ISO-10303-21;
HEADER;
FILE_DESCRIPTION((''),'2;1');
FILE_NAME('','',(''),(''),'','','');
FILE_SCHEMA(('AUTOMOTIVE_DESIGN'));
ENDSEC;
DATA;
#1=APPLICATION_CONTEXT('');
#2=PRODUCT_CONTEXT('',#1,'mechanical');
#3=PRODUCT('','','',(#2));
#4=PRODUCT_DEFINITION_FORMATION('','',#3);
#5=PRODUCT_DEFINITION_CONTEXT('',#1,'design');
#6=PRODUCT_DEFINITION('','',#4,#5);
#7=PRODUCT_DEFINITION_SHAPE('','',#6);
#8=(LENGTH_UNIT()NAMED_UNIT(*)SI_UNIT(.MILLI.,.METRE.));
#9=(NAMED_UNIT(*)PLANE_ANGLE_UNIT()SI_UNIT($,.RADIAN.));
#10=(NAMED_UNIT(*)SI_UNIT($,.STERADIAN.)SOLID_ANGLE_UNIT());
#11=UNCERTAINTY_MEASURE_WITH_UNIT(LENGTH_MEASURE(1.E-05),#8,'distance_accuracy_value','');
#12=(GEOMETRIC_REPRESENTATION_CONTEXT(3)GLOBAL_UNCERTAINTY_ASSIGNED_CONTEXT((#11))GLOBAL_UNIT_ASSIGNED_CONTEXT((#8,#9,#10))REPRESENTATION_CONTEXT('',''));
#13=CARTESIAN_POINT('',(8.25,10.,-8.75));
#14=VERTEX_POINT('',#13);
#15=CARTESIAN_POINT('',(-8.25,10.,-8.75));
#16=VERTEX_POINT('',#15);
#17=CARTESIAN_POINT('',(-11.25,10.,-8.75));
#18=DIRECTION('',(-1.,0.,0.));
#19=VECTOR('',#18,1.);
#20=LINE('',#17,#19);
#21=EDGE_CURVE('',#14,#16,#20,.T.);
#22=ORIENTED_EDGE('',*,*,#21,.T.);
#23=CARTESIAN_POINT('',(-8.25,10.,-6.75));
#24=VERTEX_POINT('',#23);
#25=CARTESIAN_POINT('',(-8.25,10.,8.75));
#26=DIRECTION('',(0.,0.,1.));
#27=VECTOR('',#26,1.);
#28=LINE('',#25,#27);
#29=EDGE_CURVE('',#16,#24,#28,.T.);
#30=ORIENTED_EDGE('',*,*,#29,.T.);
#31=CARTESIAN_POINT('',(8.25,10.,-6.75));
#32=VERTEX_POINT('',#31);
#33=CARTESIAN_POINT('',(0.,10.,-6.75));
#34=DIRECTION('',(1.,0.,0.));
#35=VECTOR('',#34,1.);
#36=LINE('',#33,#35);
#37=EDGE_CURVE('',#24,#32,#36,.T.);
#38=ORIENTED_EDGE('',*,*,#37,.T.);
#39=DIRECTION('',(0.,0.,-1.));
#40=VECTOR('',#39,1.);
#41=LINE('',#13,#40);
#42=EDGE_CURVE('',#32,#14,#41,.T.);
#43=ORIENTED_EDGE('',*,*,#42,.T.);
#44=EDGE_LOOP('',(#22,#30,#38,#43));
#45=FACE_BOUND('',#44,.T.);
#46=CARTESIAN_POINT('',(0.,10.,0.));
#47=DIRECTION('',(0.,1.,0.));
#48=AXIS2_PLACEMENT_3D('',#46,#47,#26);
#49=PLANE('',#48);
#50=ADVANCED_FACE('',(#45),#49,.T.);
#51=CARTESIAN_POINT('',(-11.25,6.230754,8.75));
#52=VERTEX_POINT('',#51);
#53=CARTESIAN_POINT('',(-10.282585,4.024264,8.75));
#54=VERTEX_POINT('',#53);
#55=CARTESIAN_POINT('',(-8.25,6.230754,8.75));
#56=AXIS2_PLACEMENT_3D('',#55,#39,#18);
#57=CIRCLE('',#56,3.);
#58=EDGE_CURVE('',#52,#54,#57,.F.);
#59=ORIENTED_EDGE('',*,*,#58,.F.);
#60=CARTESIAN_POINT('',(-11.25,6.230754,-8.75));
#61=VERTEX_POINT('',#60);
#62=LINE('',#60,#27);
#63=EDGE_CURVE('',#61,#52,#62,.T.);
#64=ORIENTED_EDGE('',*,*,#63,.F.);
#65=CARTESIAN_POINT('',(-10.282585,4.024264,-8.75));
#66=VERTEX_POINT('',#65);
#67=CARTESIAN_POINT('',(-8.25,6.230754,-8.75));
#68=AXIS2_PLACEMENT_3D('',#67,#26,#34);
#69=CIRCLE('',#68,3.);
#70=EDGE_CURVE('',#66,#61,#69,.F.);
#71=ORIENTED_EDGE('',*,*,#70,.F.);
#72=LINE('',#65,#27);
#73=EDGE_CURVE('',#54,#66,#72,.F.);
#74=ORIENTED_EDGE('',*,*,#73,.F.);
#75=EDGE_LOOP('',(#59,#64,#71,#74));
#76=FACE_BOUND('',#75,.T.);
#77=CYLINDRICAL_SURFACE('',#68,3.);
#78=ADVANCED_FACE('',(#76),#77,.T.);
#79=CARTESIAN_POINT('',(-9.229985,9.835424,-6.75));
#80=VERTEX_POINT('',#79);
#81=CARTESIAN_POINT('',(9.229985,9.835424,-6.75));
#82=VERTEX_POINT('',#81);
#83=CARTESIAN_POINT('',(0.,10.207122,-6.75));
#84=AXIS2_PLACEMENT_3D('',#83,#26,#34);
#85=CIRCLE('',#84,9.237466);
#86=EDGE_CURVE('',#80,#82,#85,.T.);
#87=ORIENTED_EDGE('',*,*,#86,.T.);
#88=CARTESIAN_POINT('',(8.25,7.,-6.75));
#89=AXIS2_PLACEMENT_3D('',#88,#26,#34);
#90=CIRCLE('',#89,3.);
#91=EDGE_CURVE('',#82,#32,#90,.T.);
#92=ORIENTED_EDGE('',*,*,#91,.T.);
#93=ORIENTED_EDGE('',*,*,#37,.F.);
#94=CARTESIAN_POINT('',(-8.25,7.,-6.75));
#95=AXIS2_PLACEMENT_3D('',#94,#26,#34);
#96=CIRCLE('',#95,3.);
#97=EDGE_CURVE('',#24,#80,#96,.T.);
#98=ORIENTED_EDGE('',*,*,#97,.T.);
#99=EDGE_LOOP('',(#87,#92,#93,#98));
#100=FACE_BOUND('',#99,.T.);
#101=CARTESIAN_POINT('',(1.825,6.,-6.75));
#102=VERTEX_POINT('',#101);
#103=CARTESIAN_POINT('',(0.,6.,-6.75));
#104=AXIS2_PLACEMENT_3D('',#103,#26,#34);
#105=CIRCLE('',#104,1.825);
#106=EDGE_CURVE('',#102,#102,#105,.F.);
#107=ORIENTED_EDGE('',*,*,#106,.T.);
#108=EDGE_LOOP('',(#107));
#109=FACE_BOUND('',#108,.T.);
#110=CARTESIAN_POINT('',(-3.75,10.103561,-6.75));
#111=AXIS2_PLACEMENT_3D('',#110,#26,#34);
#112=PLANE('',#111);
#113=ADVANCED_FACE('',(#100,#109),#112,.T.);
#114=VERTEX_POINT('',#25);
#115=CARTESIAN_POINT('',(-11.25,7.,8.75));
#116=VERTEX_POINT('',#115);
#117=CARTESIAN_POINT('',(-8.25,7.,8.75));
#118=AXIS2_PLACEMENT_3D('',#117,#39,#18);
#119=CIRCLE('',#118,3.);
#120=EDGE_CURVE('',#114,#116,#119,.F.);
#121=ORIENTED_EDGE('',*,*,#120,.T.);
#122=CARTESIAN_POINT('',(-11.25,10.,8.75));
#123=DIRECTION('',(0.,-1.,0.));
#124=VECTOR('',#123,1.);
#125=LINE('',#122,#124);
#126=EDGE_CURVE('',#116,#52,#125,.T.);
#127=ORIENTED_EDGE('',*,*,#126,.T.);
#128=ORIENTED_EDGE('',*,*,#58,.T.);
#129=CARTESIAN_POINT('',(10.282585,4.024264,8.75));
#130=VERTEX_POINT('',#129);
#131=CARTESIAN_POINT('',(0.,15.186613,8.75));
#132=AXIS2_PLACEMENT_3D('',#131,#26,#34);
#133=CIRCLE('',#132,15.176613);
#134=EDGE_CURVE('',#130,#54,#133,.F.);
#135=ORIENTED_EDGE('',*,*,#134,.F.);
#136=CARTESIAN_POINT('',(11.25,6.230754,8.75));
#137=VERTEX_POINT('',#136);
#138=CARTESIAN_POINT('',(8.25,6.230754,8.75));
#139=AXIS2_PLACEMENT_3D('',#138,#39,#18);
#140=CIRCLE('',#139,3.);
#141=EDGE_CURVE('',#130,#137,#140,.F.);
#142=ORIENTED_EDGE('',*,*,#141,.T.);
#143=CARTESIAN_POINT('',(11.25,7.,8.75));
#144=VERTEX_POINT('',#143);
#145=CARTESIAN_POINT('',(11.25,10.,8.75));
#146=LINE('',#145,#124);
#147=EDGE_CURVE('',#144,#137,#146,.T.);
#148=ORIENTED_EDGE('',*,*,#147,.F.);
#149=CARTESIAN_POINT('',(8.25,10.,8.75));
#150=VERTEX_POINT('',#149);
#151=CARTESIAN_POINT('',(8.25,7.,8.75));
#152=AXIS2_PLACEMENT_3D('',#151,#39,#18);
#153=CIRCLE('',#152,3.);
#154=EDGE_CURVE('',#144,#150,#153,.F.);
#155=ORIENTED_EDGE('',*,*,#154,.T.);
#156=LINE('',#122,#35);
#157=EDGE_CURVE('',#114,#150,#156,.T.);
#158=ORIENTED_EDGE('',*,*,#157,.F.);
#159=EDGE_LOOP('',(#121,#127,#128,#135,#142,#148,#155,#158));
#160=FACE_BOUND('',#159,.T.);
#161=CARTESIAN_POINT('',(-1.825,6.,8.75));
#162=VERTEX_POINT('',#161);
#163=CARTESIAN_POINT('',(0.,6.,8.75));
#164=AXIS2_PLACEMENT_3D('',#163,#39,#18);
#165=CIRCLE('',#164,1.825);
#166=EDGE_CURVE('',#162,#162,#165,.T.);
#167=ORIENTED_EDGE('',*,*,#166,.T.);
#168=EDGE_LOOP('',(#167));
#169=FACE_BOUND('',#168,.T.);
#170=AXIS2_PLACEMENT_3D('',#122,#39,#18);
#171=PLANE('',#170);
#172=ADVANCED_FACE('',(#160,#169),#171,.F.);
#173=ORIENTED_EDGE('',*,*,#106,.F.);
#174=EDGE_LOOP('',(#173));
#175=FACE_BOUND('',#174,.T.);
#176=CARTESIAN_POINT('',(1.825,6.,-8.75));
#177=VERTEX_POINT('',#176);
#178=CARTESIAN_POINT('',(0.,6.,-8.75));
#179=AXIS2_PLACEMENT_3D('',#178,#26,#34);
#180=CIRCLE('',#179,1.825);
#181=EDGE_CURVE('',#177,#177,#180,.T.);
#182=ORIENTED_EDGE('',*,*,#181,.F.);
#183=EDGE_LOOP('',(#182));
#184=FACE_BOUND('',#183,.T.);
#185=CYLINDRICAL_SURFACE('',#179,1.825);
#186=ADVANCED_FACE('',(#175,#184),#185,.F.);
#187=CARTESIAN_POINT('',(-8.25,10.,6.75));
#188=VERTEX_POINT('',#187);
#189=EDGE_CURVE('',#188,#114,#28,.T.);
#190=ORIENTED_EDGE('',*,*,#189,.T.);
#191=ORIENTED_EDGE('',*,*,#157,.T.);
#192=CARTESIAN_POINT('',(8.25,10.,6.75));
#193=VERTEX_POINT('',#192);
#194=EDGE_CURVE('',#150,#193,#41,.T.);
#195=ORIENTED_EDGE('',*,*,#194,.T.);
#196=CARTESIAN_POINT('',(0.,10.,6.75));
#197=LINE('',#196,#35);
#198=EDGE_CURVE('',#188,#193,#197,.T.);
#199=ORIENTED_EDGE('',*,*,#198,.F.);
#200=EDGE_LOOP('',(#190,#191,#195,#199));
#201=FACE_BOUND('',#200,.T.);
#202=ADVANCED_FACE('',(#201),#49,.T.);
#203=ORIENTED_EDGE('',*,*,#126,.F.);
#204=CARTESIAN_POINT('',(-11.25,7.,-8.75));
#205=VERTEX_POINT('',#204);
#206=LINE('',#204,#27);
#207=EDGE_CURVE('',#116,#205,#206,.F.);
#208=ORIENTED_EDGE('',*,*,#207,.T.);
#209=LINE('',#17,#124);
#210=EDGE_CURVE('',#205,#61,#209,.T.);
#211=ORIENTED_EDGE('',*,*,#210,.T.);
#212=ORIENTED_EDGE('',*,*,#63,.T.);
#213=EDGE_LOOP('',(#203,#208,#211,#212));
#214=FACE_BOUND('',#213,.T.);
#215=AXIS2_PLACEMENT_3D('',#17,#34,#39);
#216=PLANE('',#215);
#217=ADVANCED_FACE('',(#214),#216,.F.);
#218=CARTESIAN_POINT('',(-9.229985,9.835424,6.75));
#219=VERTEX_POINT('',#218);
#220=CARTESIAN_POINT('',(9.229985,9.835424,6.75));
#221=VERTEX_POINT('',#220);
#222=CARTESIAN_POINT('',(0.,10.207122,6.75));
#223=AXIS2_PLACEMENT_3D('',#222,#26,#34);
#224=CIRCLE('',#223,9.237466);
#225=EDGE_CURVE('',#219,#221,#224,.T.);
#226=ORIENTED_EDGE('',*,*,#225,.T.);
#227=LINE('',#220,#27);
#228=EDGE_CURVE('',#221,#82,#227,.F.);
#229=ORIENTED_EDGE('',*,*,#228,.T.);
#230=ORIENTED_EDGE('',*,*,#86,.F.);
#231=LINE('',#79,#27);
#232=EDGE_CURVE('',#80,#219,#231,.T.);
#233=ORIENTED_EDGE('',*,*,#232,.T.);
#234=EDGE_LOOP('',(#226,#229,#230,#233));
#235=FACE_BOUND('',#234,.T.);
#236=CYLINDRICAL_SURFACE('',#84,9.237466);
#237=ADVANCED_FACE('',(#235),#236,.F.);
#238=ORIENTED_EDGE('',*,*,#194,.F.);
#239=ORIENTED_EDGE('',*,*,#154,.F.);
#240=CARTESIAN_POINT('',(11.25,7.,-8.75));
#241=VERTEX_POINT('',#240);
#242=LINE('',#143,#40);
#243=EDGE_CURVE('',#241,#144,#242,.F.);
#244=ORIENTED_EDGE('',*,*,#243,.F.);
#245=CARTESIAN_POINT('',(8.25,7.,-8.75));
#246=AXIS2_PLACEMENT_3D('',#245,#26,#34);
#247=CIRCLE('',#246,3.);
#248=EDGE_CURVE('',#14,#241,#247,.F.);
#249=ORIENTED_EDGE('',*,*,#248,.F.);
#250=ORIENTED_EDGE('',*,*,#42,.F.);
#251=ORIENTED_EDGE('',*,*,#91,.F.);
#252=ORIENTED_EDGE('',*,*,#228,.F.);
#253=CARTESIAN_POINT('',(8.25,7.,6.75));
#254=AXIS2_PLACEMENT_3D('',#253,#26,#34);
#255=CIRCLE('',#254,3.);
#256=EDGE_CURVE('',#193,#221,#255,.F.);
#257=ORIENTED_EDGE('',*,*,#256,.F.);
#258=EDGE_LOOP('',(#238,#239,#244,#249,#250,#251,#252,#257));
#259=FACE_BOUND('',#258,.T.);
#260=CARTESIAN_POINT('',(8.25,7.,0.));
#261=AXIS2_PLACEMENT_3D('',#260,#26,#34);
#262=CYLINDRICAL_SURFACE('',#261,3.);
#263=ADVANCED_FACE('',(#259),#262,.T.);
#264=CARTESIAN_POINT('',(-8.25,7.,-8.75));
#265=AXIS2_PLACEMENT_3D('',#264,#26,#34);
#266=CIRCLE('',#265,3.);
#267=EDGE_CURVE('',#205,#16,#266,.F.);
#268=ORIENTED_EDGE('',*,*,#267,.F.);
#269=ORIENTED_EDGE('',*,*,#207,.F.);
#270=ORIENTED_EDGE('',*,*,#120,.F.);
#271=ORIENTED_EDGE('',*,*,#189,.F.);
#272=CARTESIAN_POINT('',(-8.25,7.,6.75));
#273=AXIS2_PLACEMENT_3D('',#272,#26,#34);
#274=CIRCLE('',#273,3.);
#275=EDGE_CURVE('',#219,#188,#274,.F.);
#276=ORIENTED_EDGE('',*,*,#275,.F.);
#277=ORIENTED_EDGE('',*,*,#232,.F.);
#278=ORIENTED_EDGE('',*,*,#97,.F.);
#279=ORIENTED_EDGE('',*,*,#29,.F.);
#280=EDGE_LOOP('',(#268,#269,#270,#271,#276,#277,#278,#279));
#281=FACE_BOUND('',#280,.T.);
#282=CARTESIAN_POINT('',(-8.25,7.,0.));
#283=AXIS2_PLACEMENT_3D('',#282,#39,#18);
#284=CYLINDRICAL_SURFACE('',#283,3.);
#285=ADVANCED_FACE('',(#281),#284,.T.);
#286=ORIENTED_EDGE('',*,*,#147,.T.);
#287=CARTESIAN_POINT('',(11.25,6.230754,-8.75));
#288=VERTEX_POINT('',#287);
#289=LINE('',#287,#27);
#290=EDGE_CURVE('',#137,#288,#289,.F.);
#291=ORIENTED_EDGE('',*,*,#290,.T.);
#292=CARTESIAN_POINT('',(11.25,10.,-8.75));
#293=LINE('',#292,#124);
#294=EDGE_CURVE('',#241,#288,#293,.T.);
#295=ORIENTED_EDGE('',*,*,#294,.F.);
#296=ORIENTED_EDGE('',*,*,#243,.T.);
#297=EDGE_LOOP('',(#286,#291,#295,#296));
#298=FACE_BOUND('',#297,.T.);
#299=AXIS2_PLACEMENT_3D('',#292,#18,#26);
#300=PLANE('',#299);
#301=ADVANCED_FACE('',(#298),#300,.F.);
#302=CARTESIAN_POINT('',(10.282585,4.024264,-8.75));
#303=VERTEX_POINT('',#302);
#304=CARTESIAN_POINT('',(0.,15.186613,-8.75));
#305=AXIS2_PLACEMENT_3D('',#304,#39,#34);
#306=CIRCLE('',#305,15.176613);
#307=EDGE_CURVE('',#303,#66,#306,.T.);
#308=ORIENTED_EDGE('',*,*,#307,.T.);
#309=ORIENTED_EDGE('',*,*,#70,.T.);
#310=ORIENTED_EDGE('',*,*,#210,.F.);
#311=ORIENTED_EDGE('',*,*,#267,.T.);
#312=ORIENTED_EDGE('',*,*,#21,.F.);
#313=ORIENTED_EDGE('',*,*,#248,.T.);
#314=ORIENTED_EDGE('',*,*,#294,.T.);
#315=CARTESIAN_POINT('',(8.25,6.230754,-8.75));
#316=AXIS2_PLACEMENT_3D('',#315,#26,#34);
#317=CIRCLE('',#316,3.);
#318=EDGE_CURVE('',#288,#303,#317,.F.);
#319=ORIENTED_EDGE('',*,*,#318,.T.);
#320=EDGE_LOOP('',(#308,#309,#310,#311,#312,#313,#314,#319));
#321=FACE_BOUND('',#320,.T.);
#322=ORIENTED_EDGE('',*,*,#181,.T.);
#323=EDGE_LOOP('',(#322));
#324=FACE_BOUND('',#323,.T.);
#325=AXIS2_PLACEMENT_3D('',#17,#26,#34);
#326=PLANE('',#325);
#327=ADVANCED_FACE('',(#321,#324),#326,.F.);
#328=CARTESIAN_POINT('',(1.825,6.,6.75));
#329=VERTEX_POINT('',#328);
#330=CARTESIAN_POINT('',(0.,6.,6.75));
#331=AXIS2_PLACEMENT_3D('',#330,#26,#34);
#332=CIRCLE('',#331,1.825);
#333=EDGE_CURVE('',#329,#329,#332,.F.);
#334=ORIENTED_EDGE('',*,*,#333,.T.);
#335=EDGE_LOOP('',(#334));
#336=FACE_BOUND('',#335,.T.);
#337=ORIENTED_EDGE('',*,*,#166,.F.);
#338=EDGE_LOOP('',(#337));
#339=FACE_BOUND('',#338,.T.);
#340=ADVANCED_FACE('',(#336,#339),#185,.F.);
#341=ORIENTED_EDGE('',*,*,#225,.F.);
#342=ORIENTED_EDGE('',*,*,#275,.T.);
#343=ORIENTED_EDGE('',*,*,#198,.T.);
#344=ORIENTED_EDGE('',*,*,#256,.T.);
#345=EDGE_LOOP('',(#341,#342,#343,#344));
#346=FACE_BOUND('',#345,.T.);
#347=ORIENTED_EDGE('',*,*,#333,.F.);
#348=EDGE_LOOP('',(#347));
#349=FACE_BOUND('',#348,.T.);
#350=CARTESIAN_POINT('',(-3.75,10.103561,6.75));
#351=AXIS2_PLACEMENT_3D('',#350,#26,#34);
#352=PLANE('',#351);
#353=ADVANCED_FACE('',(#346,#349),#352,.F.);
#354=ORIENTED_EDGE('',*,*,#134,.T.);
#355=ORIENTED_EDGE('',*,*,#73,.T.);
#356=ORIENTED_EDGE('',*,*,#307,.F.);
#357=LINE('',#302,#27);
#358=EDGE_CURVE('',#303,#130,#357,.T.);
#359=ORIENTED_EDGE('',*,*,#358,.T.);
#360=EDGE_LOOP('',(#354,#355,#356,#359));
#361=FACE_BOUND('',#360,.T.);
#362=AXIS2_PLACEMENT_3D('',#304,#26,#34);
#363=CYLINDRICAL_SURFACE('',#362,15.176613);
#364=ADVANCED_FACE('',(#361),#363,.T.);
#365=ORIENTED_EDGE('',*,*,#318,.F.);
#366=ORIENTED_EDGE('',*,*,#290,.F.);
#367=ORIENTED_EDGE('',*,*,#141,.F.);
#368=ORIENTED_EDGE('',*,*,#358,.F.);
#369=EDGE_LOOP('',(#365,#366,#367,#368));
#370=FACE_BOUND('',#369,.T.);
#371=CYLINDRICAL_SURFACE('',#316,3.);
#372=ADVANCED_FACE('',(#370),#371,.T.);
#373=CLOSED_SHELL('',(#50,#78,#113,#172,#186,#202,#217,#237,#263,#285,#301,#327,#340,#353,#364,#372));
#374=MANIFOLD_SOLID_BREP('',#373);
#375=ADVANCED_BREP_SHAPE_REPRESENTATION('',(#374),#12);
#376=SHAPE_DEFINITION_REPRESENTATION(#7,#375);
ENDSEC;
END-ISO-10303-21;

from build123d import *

# Parameters (mm, degrees)
SKETCH1_W               = 22.5
SKETCH1_H               = 17.5
BOSS_EXTRUDE1_DEPTH     = 10
CUT_EXTRUDE1_DEPTH      = 24.082731641
CUT_EXTRUDE1_DEPTH_BACK = 24.082731641
SKETCH2_R               = 1.825
CUT_EXTRUDE2_DEPTH      = 13.5
CUT_EXTRUDE3_REACH      = 19.405
SKETCH4_W               = 11.529065942
SKETCH4_H               = 13.5
FILLET1_R               = 3


with BuildPart() as part:
    # Sketch1 → Boss-Extrude1 (new body)
    with BuildSketch(Plane(origin=(0, 0, 0), x_dir=(1, 0, 0), z_dir=(0, 1, 0))):
        Rectangle(SKETCH1_W, SKETCH1_H)
    extrude(amount=BOSS_EXTRUDE1_DEPTH)

    # Sketch2 → Cut-Extrude1 (cut, two sides: drawn at the far end of the back side and taken through both)
    with BuildSketch(Plane.XY.offset(8.75).offset(-CUT_EXTRUDE1_DEPTH_BACK)):
        with Locations((0, 6)):
            Circle(SKETCH2_R)
        with BuildLine():
            Line((-11.25, 5), (-11.25, 0))
            Line((-11.25, 0), (11.25, 0))
            Line((11.25, 0), (11.25, 5))
            ThreePointArc((11.25, 5), (0, 0.01), (-11.25, 5))
        make_face()
    extrude(amount=CUT_EXTRUDE1_DEPTH + CUT_EXTRUDE1_DEPTH_BACK, mode=Mode.SUBTRACT)

    # Sketch3 → Cut-Extrude2 (cut)
    with BuildSketch(Plane.XY.offset(6.75)):
        with BuildLine():
            ThreePointArc((-9.233945582, 9.952114837), (0, 0.969656164), (9.233945582, 9.952114837))
            ThreePointArc((9.233945582, 9.952114837), (7.547885163, 11.733945582), (5.766054418, 10.047885163))
            ThreePointArc((5.766054418, 10.047885163), (0, 4.438869486), (-5.766054418, 10.047885163))
            ThreePointArc((-5.766054418, 10.047885163), (-7.547885163, 11.733945582), (-9.233945582, 9.952114837))
        make_face()
    extrude(amount=-CUT_EXTRUDE2_DEPTH, mode=Mode.SUBTRACT)

    # Sketch4 → Cut-Extrude3 (cut, up to next)
    with BuildSketch(Plane(origin=(0, 10, 0), x_dir=(1, 0, 0), z_dir=(0, 1, 0)), mode=Mode.PRIVATE) as cut_extrude3_sk1:
        Rectangle(SKETCH4_W, SKETCH4_H)
    cut_extrude3_tool1 = extrude(cut_extrude3_sk1.sketch, amount=-CUT_EXTRUDE3_REACH, mode=Mode.PRIVATE) & part.part
    add(cut_extrude3_tool1.solids().sort_by_distance((0, 10, 0))[0], mode=Mode.SUBTRACT)

    # Fillet1
    # the kernel refuses this fillet: 3 mm, written as the material it takes off along each edge
    with BuildSketch(Plane(origin=(11.25, 5, 12.185069568), x_dir=(0, 1, 0), z_dir=(0, 0, -1))) as fillet1_piece_1:
        with BuildLine():
            CenterArc((1.230754269, -3), FILLET1_R, 90, 47.349204062)
            ThreePointArc((-0.975735859, -0.967415115), (-0.498821765, -0.472659508), (0, 0))
            Line((0, 0), (1.230754269, 0))
        make_face()
    extrude(amount=24.370139136, mode=Mode.SUBTRACT)
    with BuildSketch(Plane(origin=(-11.25, 5, 12.185069568), x_dir=(0, 1, 0), z_dir=(0, 0, -1))) as fillet1_piece_2:
        with BuildLine():
            CenterArc((1.230754269, 3), FILLET1_R, 222.650795938, 47.349204062)
            ThreePointArc((-0.975735859, 0.967415115), (-0.498821765, 0.472659508), (0, 0))
            Line((0, 0), (1.230754269, 0))
        make_face()
    extrude(amount=24.370139136, mode=Mode.SUBTRACT)
    with BuildSketch(Plane(origin=(11.25, 10, -16.25), x_dir=(-1, 0, 0), z_dir=(0, 0, 1))) as fillet1_piece_3:
        with BuildLine():
            CenterArc((FILLET1_R, FILLET1_R), FILLET1_R, 180, 90)
            Line((0, FILLET1_R), (0, 0))
            Line((0, 0), (FILLET1_R, 0))
        make_face()
    extrude(amount=32.5, mode=Mode.SUBTRACT)
    with BuildSketch(Plane(origin=(-11.25, 10, 16.25), x_dir=(0, -1, 0), z_dir=(0, 0, -1))) as fillet1_piece_4:
        with BuildLine():
            CenterArc((FILLET1_R, -FILLET1_R), FILLET1_R, 90, 90)
            Line((0, -FILLET1_R), (0, 0))
            Line((0, 0), (FILLET1_R, 0))
        make_face()
    extrude(amount=32.5, mode=Mode.SUBTRACT)


solid = part.part
